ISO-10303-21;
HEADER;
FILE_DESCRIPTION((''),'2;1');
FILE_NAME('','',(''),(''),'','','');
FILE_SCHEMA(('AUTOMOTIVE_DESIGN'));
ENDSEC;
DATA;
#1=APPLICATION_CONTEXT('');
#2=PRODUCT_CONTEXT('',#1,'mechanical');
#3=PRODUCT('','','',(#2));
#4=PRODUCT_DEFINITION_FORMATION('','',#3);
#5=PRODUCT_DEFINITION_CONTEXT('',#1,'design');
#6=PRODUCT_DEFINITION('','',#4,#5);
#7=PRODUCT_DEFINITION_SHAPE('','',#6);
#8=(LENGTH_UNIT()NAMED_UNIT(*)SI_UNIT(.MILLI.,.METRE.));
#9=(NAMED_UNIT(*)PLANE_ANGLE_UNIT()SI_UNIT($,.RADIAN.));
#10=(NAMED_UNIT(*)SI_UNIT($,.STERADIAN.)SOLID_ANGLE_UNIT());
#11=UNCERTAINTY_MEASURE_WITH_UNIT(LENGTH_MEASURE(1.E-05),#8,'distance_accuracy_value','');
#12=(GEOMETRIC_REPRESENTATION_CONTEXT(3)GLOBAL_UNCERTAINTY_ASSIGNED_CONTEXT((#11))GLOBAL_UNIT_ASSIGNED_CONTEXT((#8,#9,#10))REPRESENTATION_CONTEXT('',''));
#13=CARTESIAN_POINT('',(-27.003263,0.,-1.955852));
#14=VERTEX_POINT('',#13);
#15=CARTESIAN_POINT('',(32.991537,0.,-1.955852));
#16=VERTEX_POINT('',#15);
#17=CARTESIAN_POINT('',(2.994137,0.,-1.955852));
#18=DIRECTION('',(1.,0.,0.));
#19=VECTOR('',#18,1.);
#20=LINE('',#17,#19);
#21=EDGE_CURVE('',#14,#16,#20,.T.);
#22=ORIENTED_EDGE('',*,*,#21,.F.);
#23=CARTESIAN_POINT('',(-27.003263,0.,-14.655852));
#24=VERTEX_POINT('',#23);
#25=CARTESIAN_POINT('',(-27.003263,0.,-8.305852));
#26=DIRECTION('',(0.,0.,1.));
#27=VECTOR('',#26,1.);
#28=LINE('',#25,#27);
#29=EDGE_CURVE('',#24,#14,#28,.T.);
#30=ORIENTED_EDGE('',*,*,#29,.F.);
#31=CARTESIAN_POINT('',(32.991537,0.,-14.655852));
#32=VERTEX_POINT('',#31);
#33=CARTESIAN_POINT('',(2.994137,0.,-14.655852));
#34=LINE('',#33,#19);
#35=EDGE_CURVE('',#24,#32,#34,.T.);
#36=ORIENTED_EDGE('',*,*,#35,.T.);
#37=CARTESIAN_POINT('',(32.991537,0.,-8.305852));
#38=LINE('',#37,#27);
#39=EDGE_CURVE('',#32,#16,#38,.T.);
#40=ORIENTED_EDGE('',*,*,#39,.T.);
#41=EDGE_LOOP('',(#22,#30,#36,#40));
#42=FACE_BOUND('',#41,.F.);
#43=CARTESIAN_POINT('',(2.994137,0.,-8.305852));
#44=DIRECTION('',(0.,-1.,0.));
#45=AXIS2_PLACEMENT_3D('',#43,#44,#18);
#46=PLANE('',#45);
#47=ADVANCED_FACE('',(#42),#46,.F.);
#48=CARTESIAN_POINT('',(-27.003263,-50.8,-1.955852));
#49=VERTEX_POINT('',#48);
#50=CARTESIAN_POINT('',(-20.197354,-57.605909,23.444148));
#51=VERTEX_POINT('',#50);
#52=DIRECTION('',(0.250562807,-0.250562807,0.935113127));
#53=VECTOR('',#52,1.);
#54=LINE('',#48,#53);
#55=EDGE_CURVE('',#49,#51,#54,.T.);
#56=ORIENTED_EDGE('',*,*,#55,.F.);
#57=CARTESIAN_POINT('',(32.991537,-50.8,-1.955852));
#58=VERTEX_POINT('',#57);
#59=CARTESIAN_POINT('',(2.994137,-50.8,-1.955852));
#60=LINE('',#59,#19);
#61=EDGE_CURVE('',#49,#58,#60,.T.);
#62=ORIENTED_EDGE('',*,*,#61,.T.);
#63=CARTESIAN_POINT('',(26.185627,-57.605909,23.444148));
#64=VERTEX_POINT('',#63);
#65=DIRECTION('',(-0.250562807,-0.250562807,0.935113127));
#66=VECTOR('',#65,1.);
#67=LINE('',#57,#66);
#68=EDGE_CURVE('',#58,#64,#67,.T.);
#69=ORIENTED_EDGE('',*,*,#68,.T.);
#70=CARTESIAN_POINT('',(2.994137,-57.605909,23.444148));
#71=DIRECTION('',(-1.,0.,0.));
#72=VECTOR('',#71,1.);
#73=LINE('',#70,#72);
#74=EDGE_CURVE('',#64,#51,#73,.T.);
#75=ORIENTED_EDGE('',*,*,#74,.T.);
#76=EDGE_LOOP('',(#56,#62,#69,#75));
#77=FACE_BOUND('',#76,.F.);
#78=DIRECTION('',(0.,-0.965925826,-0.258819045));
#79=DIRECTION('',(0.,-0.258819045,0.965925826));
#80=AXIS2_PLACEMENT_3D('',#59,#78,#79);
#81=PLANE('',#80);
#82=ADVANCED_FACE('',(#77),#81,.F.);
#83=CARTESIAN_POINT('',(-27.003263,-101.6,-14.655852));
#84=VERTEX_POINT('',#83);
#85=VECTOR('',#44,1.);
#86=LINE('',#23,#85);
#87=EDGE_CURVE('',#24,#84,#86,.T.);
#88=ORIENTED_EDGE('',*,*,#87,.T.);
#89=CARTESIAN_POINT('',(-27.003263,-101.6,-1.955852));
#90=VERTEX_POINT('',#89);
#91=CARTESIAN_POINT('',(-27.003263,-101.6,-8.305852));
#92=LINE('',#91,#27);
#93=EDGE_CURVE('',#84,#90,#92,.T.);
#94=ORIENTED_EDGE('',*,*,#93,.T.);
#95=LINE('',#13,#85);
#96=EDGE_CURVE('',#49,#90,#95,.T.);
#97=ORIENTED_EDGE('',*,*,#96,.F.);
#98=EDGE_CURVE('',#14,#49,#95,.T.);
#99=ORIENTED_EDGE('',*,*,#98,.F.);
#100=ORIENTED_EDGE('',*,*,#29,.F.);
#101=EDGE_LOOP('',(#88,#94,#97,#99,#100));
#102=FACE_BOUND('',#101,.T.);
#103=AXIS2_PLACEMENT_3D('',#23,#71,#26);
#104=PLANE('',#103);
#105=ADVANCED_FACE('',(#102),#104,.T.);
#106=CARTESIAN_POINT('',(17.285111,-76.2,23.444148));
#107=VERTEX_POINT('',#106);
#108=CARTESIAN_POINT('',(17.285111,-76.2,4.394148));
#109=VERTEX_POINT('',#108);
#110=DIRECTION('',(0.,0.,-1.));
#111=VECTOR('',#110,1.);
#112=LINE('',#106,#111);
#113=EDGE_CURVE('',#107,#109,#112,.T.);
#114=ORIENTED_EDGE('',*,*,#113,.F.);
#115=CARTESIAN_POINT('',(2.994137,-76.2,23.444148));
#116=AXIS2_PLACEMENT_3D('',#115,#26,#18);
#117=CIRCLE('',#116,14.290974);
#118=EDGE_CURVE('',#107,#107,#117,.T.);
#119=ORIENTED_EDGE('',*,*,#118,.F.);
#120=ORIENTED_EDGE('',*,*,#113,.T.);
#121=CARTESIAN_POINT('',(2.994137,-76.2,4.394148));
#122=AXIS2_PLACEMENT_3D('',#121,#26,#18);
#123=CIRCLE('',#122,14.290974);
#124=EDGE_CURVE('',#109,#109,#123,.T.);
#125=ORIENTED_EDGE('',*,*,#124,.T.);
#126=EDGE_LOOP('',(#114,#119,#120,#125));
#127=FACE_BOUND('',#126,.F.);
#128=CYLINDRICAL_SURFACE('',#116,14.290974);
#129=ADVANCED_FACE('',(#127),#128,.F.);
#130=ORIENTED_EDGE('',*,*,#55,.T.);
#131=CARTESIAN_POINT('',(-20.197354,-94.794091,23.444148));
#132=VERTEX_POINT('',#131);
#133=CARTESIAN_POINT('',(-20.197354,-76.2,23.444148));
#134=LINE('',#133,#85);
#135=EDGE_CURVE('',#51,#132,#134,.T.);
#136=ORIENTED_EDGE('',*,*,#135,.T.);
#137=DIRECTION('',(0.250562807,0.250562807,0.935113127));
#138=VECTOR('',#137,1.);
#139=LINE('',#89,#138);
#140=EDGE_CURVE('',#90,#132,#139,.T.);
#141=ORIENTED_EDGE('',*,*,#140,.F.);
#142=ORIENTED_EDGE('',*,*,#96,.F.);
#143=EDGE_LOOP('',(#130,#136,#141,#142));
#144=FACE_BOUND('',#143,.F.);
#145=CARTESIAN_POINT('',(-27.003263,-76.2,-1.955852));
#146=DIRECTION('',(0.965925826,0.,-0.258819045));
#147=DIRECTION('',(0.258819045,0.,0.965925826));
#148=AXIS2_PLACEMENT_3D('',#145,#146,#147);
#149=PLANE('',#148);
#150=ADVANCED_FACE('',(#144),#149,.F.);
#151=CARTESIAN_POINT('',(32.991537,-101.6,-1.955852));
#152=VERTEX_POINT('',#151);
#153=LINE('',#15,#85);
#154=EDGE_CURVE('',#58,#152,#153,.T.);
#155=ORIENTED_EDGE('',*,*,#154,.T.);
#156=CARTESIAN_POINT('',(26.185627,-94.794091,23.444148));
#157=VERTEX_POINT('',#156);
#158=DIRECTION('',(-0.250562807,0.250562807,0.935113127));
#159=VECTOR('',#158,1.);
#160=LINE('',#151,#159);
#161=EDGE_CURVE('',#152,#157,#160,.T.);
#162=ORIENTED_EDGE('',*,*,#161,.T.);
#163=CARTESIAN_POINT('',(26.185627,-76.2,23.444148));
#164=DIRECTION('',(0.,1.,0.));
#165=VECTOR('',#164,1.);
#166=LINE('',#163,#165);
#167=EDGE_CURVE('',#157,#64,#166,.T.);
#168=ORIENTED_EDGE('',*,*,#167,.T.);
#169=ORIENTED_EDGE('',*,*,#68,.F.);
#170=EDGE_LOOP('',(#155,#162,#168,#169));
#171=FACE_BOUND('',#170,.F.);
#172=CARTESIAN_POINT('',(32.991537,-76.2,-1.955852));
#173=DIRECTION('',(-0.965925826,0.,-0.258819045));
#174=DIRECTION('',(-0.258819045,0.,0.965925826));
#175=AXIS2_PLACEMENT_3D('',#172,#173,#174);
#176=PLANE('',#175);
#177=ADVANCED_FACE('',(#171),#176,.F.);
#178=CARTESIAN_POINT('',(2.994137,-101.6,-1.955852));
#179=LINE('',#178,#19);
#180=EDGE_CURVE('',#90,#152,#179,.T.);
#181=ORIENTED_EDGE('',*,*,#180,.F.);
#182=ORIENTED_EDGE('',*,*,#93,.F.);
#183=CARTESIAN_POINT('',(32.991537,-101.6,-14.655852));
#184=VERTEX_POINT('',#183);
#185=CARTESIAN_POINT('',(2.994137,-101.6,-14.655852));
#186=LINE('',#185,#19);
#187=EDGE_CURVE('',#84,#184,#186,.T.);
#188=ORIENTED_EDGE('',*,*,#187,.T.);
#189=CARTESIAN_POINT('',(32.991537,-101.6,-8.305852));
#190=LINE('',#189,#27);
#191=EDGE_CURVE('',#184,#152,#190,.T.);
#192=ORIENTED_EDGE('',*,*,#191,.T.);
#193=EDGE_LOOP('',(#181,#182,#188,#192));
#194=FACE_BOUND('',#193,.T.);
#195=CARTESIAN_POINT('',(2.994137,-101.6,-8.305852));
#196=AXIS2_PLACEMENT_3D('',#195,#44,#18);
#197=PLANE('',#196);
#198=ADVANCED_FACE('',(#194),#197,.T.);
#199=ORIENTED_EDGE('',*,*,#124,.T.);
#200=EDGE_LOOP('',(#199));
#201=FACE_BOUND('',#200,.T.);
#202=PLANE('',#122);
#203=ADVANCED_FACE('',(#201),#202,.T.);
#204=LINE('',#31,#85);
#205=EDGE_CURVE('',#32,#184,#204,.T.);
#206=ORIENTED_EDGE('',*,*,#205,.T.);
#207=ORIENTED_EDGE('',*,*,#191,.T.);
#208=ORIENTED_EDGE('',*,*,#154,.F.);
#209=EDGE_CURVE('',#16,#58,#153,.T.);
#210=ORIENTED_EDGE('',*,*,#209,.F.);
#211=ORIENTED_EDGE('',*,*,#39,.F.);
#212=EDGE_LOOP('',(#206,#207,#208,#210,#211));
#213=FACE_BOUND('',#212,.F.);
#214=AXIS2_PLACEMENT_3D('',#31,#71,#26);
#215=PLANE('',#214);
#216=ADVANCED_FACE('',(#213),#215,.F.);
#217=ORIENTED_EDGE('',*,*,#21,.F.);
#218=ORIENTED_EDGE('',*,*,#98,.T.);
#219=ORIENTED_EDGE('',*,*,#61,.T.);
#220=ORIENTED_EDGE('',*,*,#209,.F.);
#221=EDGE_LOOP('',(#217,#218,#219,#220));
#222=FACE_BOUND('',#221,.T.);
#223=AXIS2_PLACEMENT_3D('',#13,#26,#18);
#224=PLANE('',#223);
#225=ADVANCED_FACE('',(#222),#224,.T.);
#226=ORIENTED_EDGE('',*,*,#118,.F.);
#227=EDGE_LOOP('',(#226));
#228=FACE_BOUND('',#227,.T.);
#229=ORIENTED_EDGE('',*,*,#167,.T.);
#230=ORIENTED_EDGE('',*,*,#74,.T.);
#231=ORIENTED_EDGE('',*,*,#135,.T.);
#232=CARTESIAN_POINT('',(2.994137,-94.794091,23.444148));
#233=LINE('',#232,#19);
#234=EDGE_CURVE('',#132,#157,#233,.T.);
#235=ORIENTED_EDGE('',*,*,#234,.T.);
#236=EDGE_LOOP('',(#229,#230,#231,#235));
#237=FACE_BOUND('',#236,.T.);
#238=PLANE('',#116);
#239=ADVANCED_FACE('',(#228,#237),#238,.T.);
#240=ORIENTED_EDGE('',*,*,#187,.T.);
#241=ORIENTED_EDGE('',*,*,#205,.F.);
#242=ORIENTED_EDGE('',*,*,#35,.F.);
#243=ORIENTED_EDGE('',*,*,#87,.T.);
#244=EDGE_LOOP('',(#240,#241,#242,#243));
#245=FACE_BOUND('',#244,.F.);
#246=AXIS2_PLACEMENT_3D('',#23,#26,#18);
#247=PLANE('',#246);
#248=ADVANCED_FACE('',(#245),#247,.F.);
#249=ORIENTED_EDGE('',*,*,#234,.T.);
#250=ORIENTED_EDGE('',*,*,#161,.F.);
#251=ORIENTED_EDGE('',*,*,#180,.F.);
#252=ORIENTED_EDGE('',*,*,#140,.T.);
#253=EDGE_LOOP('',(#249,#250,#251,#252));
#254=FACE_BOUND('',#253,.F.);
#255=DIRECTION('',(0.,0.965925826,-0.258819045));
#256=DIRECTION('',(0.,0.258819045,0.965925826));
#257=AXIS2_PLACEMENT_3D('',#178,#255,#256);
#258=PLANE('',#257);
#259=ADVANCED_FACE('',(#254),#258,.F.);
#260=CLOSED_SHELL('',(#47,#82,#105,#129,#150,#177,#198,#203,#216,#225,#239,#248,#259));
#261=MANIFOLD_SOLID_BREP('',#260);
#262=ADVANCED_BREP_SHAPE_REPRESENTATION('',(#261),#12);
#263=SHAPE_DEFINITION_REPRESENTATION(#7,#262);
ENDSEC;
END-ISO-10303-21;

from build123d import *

# Parameters (mm, degrees)
F0_W     = 59.9948
F0_H     = 12.7
F1_DEPTH = 101.6
F2_W     = 59.9948
F2_H     = 50.8
F3_DEPTH = 25.4
F3_TAPER = 15
F4_R     = 14.2909740927
F5_DEPTH = 19.05


with BuildPart() as f1:
    # F0 (on Front) → F1 (new body)
    with BuildSketch(Plane.XZ):
        with Locations((2.9941368848, -8.3058523926)):
            Rectangle(F0_W, F0_H)
    extrude(amount=F1_DEPTH)

    # F2 (on face) → F3 (join)
    with BuildSketch(Plane.XY.offset(-1.9558523926)):
        with Locations((2.9941368848, -76.2)):
            Rectangle(F2_W, F2_H)
    extrude(amount=F3_DEPTH, taper=F3_TAPER)

    # F4 (on face) → F5 (cut)
    with BuildSketch(Plane.XY.offset(23.4441476074)):
        with Locations((2.9941368848, -76.2)):
            Circle(F4_R)
    extrude(amount=-F5_DEPTH, mode=Mode.SUBTRACT)


solid = f1.part
